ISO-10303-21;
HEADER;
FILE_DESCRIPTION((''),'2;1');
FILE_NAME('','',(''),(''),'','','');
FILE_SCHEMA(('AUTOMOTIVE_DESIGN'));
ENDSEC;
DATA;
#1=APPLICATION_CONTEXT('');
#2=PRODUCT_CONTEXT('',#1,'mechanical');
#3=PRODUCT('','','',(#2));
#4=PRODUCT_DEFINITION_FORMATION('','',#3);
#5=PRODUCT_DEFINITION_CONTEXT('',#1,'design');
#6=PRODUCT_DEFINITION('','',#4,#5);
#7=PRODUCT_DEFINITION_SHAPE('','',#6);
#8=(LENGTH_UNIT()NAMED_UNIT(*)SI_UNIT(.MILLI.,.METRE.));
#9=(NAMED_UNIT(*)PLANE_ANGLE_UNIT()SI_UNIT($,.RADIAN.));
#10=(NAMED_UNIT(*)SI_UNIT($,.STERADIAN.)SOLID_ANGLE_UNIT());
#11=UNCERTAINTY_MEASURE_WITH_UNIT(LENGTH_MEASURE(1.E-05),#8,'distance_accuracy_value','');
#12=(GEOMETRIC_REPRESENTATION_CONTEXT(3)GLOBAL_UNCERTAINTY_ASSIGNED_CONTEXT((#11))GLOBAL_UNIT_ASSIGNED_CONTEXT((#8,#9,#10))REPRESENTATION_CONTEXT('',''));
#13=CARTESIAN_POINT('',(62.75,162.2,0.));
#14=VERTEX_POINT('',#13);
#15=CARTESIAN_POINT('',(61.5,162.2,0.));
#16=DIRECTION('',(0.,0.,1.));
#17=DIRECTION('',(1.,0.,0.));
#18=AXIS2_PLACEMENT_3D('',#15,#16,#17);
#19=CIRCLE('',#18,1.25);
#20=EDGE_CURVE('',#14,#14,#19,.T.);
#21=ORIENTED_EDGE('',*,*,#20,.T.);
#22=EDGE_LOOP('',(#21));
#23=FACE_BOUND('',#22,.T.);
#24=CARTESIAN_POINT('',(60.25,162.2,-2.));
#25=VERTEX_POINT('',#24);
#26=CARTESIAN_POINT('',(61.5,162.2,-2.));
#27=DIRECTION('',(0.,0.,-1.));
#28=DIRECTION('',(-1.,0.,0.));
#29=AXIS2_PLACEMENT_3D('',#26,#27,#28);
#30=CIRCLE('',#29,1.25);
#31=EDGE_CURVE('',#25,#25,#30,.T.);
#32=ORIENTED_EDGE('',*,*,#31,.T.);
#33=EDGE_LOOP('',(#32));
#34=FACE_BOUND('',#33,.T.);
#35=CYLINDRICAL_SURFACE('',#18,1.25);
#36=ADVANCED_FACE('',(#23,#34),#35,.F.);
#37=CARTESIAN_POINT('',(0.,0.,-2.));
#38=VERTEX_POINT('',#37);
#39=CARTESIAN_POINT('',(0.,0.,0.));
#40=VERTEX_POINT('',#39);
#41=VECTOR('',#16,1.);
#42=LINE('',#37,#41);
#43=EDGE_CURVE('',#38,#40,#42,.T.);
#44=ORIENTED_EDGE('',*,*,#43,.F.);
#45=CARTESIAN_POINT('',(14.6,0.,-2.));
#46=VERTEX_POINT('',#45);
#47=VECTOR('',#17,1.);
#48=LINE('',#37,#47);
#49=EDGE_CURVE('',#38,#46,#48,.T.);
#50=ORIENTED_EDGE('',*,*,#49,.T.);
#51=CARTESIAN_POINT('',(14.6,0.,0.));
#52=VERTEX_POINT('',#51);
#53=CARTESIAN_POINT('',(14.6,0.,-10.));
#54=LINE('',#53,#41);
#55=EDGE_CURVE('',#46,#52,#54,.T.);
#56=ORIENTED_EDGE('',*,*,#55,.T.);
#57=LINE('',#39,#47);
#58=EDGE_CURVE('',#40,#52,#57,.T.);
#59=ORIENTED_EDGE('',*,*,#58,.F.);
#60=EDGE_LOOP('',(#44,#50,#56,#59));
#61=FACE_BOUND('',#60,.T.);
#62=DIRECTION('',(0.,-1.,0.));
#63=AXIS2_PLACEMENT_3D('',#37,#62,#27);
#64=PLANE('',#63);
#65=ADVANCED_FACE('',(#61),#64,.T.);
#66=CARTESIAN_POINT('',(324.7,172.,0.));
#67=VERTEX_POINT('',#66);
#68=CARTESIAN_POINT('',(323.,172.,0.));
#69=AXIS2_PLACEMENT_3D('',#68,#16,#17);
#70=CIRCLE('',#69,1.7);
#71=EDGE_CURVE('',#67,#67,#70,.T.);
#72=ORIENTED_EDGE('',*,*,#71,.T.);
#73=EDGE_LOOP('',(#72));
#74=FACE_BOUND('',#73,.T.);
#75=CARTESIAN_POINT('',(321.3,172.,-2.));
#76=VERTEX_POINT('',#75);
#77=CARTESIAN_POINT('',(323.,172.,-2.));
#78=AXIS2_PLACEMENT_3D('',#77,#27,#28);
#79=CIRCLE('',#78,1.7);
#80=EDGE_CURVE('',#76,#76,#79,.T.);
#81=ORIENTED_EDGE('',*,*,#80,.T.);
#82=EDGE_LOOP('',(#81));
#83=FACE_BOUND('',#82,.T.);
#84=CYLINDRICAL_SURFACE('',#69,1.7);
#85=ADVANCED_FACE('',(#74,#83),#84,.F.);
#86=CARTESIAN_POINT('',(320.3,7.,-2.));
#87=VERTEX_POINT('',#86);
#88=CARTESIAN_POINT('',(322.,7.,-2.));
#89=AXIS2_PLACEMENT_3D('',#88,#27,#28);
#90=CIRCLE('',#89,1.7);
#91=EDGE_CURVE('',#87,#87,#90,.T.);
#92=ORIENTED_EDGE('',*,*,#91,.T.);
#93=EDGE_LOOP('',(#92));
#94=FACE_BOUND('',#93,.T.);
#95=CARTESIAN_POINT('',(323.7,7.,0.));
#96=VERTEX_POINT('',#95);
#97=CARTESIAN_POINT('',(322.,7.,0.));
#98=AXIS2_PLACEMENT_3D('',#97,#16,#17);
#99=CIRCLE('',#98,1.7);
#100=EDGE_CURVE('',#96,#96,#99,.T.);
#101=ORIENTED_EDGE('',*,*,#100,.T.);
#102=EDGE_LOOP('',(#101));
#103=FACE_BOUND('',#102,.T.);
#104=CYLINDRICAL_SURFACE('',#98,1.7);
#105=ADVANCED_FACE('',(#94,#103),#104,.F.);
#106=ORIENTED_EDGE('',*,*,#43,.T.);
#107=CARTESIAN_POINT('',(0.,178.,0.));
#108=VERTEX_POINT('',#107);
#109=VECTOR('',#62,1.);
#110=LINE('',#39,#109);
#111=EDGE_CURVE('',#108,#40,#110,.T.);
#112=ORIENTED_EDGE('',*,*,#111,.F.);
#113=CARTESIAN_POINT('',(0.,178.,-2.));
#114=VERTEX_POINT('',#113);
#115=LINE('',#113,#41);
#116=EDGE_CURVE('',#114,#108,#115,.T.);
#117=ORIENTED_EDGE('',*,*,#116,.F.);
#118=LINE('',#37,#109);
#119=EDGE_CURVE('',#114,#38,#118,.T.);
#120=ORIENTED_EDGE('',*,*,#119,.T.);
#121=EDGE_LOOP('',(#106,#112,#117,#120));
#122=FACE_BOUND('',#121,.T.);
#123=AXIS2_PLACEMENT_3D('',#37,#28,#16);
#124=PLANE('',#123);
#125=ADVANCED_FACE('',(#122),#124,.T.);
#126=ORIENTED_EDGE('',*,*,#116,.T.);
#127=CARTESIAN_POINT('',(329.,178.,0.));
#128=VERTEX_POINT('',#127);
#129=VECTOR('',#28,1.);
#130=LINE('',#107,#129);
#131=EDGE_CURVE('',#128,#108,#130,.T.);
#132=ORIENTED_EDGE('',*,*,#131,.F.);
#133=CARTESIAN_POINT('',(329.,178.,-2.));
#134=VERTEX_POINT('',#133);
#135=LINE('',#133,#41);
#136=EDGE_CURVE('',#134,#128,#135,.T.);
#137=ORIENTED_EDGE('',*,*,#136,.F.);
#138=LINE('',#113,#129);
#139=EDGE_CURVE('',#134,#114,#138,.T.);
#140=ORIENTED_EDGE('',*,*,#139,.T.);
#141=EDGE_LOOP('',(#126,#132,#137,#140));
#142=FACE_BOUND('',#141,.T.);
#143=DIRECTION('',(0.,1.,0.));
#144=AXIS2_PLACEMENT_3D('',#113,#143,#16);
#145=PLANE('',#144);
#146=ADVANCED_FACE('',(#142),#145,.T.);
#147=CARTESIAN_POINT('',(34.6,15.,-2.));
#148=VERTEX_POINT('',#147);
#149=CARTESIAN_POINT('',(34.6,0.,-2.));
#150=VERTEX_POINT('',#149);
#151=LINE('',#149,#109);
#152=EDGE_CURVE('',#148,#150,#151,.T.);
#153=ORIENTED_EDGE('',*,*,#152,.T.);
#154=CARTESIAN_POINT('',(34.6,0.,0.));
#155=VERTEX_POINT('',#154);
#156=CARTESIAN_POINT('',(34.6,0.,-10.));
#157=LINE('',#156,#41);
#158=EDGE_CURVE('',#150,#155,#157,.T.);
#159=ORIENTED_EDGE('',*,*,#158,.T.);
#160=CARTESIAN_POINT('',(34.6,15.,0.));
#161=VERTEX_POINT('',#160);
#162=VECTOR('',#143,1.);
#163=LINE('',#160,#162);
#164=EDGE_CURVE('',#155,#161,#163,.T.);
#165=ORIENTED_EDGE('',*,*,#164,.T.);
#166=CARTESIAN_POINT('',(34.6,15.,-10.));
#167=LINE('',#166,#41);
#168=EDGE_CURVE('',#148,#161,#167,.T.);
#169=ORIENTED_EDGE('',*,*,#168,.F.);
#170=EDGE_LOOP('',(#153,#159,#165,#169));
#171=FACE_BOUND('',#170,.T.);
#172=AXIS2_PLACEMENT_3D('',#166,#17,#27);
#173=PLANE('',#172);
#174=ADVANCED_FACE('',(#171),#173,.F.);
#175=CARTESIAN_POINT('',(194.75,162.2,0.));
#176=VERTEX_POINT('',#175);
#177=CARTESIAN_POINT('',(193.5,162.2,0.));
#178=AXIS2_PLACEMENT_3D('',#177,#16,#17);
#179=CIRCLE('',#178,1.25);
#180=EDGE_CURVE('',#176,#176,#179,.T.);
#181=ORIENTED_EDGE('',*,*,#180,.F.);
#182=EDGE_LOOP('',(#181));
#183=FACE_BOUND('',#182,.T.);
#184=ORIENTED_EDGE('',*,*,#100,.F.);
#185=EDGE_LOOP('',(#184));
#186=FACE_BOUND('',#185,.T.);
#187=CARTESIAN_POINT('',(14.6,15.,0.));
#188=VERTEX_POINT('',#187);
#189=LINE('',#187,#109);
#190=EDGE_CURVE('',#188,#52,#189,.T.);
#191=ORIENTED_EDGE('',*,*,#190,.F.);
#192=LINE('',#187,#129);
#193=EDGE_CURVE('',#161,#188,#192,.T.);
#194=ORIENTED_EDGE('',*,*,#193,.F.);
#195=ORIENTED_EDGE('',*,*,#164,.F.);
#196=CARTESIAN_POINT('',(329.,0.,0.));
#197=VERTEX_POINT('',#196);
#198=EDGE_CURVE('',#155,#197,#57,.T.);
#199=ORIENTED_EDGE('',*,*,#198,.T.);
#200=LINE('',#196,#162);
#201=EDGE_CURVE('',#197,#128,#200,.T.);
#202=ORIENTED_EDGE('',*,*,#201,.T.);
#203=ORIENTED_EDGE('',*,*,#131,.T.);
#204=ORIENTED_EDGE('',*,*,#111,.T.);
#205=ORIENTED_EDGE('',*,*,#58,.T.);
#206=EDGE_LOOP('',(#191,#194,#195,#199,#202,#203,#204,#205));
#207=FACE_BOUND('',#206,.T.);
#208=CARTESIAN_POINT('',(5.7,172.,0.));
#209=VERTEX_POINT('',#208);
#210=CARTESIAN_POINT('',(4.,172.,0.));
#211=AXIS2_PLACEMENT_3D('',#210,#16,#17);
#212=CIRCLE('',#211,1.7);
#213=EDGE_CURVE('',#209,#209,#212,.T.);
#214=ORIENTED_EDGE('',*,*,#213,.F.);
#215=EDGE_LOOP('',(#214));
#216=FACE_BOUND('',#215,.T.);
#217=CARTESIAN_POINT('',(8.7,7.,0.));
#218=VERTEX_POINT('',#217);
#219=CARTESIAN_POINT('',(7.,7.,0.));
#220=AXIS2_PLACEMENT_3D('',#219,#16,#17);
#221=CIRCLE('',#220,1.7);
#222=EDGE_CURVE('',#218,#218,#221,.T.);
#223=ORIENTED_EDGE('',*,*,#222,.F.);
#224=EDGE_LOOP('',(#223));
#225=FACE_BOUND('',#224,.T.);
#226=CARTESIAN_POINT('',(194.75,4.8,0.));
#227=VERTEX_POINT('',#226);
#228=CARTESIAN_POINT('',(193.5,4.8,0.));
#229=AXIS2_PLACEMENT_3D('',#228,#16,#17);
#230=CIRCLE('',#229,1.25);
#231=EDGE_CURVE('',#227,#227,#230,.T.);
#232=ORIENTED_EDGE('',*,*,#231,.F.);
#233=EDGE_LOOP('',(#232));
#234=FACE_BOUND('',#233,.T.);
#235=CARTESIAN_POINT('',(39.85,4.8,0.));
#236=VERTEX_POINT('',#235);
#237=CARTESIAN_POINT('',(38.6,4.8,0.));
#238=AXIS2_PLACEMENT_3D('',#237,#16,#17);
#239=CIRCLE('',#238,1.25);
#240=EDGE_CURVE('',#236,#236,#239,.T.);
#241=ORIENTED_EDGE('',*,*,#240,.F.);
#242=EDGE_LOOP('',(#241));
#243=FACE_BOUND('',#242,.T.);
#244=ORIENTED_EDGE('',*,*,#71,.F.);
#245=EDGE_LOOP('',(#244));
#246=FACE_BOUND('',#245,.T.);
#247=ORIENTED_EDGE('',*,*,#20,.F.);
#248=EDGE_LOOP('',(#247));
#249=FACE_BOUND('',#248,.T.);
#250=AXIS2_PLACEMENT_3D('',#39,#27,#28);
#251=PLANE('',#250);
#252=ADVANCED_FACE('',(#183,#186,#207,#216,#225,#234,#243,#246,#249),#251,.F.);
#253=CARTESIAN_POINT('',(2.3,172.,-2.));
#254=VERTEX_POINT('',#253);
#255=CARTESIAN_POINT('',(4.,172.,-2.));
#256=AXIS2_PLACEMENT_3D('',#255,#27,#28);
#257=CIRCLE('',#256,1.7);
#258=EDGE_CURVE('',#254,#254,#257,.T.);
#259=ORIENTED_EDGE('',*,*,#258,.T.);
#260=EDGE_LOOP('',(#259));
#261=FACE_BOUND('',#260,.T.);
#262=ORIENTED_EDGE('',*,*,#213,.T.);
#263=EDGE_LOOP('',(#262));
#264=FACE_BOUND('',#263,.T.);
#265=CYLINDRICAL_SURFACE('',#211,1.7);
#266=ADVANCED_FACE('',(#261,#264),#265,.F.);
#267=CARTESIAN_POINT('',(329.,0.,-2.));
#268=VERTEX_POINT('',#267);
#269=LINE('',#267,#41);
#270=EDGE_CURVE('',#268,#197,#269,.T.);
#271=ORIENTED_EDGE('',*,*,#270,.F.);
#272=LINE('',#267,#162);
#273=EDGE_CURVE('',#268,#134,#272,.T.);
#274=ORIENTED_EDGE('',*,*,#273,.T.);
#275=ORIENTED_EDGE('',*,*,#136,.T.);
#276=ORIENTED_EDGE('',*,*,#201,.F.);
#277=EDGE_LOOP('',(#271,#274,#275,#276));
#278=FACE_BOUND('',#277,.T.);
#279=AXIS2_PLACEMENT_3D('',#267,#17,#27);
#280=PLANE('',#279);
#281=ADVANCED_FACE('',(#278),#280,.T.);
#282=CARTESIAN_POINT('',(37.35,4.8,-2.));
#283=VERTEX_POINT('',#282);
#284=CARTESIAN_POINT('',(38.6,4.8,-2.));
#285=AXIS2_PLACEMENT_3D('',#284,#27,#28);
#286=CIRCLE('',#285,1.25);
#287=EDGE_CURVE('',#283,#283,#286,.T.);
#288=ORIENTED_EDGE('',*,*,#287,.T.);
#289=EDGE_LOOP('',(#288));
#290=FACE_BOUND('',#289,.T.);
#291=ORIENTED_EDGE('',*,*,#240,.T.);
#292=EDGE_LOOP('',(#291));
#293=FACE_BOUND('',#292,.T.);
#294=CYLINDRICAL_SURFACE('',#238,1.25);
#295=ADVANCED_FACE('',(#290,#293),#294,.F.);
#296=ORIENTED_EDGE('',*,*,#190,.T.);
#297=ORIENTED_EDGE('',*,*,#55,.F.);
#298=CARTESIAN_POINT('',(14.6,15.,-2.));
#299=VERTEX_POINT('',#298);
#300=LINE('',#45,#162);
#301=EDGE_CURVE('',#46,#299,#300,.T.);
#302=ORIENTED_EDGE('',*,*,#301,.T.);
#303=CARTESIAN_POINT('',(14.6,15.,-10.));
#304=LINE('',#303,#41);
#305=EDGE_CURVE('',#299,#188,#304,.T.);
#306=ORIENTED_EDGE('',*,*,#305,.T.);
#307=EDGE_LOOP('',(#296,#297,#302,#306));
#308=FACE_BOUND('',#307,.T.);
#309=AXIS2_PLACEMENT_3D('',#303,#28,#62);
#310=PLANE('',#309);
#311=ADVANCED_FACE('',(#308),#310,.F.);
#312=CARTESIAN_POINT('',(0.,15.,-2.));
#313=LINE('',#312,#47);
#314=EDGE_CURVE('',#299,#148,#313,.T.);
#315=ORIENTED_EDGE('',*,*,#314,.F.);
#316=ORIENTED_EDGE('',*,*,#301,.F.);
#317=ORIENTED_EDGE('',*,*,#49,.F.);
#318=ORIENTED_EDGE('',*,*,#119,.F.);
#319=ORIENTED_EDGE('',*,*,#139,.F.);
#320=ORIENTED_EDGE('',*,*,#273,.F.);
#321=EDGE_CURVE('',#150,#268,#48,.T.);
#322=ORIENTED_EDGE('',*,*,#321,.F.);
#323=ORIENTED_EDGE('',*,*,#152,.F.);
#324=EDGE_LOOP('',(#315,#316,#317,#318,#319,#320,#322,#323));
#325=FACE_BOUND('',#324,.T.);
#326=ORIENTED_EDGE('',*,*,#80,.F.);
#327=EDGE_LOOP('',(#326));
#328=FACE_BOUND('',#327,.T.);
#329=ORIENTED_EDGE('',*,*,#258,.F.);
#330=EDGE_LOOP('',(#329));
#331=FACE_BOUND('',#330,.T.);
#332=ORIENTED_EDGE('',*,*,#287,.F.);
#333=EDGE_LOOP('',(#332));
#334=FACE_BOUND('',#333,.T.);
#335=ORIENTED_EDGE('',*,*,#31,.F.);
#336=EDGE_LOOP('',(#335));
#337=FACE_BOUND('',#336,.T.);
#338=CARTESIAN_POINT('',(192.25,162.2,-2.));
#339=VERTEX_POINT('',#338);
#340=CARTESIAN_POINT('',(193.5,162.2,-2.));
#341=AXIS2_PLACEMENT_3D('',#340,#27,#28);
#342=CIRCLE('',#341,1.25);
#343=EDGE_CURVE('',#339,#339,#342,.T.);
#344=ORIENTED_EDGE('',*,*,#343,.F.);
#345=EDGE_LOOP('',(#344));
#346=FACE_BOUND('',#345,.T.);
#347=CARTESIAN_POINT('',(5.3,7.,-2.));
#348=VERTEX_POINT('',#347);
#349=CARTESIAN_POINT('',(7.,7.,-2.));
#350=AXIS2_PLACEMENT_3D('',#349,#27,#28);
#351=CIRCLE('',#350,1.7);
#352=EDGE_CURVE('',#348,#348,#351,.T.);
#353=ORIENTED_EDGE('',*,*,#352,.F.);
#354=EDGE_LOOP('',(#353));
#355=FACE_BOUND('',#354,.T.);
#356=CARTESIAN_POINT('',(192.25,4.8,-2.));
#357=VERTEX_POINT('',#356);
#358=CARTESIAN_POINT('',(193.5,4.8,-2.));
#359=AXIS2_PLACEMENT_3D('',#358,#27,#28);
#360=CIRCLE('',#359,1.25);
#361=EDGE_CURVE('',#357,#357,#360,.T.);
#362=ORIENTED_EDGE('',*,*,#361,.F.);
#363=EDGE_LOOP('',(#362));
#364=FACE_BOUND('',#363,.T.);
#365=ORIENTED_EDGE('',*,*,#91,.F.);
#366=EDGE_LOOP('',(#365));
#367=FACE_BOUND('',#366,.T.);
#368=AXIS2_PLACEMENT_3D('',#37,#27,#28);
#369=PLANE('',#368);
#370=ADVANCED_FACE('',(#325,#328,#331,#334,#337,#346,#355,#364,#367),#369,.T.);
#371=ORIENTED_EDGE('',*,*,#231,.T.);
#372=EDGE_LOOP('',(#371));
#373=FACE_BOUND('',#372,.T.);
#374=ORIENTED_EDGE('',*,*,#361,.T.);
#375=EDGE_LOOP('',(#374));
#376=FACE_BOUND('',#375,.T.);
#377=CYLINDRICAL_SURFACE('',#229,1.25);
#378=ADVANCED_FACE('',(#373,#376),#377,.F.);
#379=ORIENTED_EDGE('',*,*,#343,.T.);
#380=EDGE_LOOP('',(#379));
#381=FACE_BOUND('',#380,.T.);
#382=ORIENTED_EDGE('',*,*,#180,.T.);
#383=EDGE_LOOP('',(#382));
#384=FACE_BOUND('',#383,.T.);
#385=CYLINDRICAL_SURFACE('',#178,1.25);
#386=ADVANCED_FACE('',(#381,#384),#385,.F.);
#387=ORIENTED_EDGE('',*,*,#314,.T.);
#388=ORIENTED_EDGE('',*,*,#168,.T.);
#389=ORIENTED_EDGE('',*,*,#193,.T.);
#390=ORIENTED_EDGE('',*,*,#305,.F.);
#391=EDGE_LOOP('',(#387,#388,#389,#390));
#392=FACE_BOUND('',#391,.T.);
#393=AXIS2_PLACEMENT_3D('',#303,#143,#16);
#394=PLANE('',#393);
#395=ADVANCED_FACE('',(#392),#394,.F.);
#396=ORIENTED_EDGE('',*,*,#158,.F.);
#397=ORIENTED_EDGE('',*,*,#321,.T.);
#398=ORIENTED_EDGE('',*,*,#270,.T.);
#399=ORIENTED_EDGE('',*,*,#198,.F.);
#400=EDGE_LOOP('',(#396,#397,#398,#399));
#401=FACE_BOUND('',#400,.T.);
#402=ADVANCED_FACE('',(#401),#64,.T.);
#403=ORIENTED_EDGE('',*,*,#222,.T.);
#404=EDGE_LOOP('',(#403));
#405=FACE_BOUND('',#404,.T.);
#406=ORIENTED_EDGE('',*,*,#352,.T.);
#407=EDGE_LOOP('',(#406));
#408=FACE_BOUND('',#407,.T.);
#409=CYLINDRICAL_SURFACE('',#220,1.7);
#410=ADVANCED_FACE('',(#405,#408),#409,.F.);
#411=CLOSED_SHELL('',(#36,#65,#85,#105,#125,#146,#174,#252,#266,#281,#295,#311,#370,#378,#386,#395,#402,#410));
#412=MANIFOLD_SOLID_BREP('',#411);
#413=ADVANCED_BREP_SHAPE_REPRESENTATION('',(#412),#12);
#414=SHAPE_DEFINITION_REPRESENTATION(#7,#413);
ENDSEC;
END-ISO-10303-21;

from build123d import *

# Parameters (mm, degrees)
SKETCH_1_W             = 329
SKETCH_1_H             = 178
SM_BASE_FLANGE_1_DEPTH = 2
HOLE_WIZARD_M3_3_D     = 3.4
HOLE_WIZARD_M3_1_D     = 2.5
SKETCH_20_W            = 20
SKETCH_20_H            = 15
CUT_EXTRUDE_1_DEPTH    = 10


# Sheet-metal steps are written as plain solids
with BuildPart() as part:
    # Sketch 1 → ﾍﾞｰｽ-ﾌﾗﾝｼﾞ1 (new body)
    with BuildSketch(Plane.XY):
        with Locations((164.5, 89)):
            Rectangle(SKETCH_1_W, SKETCH_1_H)
    extrude(amount=-SM_BASE_FLANGE_1_DEPTH)

    # M3 すきま穴3 (through all)
    with Locations(Plane.XY):
        with Locations((322, 7), (7, 7), (4, 172), (323, 172)):
            Hole(HOLE_WIZARD_M3_3_D / 2)

    # M3 ねじ穴1 (through all)
    with Locations(Plane.XY):
        with Locations((61.5, 162.2), (193.5, 162.2), (193.5, 4.8), (38.6, 4.8)):
            Hole(HOLE_WIZARD_M3_1_D / 2)

    # ｽｹｯﾁ20 → ｶｯﾄ - 押し出し1 (cut)
    with BuildSketch(Plane.XY):
        with Locations((24.6, 7.5)):
            Rectangle(SKETCH_20_W, SKETCH_20_H)
    extrude(amount=-CUT_EXTRUDE_1_DEPTH, mode=Mode.SUBTRACT)


solid = part.part
